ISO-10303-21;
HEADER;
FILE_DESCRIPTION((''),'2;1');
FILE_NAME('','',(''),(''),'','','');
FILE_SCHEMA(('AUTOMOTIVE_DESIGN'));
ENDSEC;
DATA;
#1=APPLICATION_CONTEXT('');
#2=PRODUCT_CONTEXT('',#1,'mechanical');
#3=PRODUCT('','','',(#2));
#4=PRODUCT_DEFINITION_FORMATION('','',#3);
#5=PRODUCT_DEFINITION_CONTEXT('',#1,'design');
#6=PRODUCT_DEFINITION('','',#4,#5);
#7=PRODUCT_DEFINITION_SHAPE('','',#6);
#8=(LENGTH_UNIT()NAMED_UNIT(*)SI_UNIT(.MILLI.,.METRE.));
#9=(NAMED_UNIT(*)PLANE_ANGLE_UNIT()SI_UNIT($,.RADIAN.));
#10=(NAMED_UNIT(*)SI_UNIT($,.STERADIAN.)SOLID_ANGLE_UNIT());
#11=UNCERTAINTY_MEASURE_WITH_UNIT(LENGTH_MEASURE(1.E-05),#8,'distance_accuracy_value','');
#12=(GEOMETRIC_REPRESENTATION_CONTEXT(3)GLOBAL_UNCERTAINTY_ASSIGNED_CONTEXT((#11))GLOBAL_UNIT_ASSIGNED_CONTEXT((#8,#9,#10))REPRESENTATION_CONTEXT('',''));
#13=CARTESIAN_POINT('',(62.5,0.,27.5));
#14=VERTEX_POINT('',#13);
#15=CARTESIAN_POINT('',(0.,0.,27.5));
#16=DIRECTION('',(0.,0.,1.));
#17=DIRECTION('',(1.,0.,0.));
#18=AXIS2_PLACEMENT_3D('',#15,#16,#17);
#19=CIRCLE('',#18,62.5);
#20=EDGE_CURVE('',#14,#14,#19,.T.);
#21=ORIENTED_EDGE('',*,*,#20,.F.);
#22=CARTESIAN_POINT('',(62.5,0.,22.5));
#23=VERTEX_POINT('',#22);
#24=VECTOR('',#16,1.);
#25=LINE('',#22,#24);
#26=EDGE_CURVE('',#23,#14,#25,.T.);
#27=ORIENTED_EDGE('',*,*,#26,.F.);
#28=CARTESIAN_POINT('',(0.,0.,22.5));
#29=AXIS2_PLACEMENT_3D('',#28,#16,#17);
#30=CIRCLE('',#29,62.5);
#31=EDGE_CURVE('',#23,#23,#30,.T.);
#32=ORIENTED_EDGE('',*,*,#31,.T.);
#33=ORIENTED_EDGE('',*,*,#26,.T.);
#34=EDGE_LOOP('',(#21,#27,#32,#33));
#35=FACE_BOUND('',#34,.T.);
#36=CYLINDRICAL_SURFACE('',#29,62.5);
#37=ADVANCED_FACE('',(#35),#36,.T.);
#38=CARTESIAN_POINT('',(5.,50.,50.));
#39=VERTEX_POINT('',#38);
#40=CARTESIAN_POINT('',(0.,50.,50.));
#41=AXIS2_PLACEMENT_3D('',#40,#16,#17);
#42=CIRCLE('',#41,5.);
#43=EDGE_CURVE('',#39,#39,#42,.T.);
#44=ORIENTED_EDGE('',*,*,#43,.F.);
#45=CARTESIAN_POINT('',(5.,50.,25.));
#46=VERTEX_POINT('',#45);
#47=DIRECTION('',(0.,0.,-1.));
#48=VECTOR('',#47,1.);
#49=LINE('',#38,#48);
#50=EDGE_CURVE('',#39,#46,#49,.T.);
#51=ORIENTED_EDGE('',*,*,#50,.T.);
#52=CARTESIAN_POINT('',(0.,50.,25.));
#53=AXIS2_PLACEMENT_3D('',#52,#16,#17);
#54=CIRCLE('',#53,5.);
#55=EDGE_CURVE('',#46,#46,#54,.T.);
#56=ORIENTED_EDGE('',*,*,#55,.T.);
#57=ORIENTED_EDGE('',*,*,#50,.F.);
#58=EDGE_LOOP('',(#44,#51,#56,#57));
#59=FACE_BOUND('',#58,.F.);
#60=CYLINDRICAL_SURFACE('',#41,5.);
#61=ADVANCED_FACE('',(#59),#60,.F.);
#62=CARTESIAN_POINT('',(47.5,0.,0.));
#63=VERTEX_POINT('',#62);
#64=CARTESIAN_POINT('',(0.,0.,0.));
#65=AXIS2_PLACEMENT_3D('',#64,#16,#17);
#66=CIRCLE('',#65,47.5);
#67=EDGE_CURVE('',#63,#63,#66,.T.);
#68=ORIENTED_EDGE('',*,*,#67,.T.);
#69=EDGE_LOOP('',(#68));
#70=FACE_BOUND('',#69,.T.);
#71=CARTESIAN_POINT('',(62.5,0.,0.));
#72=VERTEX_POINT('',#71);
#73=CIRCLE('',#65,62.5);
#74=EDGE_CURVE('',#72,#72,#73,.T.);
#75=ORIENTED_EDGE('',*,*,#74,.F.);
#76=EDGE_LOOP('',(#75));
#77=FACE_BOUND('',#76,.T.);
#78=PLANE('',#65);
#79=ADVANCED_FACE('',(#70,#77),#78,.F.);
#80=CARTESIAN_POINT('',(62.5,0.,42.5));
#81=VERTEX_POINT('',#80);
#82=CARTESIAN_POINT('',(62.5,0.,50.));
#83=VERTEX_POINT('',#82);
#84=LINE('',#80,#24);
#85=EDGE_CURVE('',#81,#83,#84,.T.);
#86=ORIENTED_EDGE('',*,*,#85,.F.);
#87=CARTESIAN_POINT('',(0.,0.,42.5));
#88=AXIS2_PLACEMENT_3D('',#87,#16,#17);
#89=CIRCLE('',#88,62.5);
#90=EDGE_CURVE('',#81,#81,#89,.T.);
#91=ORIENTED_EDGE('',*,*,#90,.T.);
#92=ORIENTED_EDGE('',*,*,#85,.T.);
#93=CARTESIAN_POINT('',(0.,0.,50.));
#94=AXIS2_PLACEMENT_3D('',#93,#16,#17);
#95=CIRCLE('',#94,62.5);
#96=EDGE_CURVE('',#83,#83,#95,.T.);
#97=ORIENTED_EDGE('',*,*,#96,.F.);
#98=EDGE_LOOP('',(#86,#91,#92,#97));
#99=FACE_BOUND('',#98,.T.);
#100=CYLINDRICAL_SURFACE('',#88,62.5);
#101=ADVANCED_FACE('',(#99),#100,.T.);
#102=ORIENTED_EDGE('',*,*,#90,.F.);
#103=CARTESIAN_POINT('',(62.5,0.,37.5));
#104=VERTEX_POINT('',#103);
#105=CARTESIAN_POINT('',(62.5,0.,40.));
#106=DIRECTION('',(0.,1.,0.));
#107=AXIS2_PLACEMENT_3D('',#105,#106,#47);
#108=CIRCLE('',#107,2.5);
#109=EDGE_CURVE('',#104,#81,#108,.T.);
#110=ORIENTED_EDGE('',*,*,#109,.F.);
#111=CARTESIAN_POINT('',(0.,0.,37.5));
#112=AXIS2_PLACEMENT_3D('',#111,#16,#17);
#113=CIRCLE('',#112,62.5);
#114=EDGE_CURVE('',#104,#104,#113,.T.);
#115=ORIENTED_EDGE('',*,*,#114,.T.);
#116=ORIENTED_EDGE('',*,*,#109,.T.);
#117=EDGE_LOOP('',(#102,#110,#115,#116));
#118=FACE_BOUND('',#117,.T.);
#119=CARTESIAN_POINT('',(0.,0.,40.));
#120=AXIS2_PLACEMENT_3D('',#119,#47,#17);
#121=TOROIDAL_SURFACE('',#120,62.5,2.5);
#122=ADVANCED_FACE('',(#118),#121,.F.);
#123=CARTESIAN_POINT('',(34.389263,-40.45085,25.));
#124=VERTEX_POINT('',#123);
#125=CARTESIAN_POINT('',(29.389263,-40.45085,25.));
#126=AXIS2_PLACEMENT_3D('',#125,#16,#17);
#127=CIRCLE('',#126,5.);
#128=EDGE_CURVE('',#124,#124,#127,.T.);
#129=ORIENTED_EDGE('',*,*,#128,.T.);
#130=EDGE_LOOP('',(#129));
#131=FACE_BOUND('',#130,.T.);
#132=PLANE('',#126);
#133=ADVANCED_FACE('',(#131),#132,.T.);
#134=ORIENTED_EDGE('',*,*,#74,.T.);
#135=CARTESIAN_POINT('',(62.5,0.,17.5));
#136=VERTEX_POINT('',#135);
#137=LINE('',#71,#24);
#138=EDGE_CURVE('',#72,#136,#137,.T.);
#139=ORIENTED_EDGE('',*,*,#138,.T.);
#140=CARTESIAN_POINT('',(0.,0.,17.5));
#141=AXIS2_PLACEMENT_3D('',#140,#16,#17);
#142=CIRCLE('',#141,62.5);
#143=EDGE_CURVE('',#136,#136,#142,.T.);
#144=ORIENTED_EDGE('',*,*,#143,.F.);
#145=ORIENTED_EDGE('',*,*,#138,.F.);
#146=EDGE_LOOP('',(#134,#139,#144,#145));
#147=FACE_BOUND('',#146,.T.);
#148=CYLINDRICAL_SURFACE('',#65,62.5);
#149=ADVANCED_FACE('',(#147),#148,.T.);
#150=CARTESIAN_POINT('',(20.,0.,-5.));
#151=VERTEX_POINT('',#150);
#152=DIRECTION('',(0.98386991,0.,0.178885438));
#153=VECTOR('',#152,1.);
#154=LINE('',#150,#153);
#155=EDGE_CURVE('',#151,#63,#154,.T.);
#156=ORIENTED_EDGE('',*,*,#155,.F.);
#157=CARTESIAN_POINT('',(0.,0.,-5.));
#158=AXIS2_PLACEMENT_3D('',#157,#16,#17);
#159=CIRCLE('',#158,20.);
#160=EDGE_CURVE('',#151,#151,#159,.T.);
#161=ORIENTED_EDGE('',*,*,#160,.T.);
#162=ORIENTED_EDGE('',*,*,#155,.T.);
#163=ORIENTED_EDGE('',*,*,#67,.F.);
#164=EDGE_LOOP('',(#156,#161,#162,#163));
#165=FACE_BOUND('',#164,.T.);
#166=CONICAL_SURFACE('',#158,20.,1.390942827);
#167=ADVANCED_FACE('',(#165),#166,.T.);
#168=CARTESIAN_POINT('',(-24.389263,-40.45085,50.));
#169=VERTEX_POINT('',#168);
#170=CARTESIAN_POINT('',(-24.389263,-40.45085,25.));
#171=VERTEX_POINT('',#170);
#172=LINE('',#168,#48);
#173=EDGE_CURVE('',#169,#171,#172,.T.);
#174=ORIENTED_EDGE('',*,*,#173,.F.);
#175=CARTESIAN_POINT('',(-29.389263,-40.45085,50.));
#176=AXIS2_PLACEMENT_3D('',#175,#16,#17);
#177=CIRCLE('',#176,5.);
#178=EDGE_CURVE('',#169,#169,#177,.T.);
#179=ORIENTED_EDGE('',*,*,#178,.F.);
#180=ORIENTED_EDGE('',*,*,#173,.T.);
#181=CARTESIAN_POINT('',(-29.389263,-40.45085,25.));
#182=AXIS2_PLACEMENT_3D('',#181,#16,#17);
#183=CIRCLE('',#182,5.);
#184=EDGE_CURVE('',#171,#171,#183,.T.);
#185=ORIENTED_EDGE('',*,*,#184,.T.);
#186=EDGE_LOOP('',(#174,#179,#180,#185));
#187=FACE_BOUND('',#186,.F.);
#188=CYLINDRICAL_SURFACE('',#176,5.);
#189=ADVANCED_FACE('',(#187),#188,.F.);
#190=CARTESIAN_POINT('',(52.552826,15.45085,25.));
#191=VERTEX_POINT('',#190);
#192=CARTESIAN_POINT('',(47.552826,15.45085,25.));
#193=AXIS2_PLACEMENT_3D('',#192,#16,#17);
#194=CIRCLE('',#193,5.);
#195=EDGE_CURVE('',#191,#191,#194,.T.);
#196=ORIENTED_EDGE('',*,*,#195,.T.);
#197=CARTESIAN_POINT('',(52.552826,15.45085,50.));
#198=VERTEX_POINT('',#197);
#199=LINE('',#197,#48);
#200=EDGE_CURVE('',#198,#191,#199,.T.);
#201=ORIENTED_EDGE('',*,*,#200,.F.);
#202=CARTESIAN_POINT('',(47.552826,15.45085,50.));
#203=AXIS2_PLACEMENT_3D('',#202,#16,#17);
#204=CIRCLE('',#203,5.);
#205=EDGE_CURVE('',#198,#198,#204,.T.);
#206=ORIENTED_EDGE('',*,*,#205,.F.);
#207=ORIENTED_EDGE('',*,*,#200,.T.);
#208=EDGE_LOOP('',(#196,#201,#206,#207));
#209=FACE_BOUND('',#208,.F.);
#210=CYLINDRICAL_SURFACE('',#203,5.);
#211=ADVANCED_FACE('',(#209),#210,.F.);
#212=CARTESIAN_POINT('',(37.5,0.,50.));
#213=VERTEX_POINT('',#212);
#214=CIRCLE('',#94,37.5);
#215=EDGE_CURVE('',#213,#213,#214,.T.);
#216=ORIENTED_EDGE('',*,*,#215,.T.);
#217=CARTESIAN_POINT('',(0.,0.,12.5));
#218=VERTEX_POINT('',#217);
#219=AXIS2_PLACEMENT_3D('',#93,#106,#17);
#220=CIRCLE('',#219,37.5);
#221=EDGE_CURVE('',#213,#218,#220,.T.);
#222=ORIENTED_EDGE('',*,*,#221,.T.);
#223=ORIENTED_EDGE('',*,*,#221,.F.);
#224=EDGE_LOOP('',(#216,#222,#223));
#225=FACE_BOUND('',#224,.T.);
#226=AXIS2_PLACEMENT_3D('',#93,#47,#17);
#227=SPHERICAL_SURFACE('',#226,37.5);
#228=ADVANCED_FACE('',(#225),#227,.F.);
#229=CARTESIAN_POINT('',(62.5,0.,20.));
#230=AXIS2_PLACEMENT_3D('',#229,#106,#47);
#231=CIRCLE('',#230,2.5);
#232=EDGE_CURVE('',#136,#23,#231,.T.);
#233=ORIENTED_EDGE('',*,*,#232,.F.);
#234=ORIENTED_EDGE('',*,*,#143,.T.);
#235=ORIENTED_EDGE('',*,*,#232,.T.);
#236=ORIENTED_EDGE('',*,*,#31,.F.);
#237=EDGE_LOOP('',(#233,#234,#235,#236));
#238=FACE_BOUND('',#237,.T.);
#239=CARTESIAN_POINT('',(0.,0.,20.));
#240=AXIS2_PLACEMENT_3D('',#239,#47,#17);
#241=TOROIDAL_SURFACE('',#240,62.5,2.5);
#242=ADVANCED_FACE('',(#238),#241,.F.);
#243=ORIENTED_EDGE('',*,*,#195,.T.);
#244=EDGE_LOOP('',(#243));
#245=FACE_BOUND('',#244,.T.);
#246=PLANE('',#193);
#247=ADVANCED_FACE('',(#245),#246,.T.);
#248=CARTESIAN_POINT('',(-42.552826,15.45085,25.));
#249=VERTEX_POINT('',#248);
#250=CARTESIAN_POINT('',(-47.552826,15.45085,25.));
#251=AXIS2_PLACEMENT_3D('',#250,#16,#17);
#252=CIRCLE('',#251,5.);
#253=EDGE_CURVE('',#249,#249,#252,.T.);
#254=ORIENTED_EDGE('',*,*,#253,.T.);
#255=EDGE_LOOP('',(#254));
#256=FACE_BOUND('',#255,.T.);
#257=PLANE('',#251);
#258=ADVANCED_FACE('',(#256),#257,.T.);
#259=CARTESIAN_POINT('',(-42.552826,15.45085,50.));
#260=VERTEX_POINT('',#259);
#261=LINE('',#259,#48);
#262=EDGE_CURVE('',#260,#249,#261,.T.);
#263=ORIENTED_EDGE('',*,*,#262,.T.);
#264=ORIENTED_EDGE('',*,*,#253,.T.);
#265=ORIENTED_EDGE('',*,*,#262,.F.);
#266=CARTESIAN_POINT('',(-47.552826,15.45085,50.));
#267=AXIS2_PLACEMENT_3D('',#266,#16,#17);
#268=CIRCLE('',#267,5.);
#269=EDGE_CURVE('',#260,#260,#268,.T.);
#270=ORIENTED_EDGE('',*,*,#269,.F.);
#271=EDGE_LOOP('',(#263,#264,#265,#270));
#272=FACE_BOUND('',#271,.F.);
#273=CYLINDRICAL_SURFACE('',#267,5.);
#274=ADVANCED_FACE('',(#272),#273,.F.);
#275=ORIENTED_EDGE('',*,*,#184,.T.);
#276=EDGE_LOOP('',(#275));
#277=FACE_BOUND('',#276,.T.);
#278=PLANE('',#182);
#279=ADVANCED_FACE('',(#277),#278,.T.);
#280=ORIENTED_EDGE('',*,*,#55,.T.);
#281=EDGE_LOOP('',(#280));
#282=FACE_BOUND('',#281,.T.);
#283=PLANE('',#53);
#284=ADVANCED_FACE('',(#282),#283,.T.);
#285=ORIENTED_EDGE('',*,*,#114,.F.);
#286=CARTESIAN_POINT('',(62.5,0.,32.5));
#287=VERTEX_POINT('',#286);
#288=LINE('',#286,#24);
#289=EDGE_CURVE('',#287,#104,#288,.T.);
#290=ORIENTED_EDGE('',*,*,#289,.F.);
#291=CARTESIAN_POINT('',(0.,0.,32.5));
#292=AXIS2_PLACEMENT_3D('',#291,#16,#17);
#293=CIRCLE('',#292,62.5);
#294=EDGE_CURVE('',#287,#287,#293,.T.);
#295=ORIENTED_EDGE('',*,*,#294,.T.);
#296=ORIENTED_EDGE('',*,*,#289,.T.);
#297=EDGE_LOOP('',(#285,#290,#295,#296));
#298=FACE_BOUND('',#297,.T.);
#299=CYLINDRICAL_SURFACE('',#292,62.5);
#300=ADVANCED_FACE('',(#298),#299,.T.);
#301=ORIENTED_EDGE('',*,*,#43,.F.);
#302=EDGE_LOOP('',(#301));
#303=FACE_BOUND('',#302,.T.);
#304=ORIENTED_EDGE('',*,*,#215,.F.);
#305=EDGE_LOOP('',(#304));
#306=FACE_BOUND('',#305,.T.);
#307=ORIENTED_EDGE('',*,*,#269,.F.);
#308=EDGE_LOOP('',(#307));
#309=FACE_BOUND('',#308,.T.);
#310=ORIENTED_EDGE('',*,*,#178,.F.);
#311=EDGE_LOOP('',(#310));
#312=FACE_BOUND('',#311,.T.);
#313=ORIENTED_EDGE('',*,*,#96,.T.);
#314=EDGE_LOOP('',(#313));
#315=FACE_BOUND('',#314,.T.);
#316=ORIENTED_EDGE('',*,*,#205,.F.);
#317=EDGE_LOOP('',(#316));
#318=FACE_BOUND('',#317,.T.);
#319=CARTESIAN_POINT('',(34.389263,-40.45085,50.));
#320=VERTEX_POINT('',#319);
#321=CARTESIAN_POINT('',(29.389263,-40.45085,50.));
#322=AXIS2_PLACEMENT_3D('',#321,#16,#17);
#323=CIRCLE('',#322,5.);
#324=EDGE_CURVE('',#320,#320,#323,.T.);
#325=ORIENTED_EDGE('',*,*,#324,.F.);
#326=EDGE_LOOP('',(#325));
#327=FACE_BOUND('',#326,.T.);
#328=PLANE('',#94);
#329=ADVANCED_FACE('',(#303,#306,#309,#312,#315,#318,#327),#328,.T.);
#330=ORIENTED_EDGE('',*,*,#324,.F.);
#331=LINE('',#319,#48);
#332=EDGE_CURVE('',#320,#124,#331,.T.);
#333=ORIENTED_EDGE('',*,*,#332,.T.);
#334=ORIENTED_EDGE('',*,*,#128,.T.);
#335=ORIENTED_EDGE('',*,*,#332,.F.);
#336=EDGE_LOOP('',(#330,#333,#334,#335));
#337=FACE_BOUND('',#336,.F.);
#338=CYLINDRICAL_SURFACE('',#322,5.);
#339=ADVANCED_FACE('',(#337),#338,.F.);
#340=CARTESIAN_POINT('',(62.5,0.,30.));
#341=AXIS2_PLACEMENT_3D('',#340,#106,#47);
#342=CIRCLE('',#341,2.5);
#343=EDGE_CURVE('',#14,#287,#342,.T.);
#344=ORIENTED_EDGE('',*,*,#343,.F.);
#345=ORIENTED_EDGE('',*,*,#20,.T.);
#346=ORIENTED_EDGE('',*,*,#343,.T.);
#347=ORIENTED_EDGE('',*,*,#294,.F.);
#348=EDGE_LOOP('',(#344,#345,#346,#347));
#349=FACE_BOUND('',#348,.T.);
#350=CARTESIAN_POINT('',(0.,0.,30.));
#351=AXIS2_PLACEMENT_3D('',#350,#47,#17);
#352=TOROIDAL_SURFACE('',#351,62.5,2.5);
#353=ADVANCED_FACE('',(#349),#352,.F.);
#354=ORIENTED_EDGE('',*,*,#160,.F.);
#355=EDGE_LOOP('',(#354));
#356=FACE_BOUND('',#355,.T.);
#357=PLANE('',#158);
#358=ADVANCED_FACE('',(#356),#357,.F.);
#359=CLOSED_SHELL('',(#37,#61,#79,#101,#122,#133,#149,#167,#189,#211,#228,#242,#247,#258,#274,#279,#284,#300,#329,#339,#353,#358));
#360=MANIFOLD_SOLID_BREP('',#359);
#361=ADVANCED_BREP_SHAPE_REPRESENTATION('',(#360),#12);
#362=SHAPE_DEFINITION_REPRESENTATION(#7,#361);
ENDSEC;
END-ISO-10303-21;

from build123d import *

# Parameters (mm, degrees)
F2_R     = 5
F3_DEPTH = 25


# Not quite as in the source:
# - a feature names something its author has since deleted; it is built from what else it names


with BuildPart() as f1:
    # F0 (on Front) → F1 (revolve)
    with BuildSketch(Plane.XZ):
        with BuildLine():
            Line((0, 12.5), (0, 0))
            Line((0, 0), (0, -5))
            Line((0, -5), (20, -5))
            Line((20, -5), (47.5, 0))
            Line((47.5, 0), (62.5, 0))
            Line((62.5, 0), (62.5, 17.5))
            ThreePointArc((62.5, 17.5), (60, 20), (62.5, 22.5))
            Line((62.5, 22.5), (62.5, 27.5))
            ThreePointArc((62.5, 27.5), (60, 30), (62.5, 32.5))
            Line((62.5, 32.5), (62.5, 37.5))
            ThreePointArc((62.5, 37.5), (60, 40), (62.5, 42.5))
            Line((62.5, 42.5), (62.5, 50))
            Line((62.5, 50), (37.5, 50))
            ThreePointArc((37.5, 50), (26.5165042945, 23.4834957055), (0, 12.5))
        make_face()
    revolve(axis=Axis((0, 0, 25), (0, 0, 1)))

    # F2 (on face) → F3 (cut)
    with BuildSketch(Plane.XY.offset(50)):
        with Locations((0, 50)):
            Circle(F2_R)
        with Locations((-47.5528258148, 15.4508497187)):
            Circle(F2_R)
        with Locations((-29.3892626146, -40.4508497187)):
            Circle(F2_R)
        with Locations((29.3892626146, -40.4508497187)):
            Circle(F2_R)
        with Locations((47.5528258148, 15.4508497187)):
            Circle(F2_R)
    extrude(amount=-F3_DEPTH, mode=Mode.SUBTRACT)


solid = f1.part
